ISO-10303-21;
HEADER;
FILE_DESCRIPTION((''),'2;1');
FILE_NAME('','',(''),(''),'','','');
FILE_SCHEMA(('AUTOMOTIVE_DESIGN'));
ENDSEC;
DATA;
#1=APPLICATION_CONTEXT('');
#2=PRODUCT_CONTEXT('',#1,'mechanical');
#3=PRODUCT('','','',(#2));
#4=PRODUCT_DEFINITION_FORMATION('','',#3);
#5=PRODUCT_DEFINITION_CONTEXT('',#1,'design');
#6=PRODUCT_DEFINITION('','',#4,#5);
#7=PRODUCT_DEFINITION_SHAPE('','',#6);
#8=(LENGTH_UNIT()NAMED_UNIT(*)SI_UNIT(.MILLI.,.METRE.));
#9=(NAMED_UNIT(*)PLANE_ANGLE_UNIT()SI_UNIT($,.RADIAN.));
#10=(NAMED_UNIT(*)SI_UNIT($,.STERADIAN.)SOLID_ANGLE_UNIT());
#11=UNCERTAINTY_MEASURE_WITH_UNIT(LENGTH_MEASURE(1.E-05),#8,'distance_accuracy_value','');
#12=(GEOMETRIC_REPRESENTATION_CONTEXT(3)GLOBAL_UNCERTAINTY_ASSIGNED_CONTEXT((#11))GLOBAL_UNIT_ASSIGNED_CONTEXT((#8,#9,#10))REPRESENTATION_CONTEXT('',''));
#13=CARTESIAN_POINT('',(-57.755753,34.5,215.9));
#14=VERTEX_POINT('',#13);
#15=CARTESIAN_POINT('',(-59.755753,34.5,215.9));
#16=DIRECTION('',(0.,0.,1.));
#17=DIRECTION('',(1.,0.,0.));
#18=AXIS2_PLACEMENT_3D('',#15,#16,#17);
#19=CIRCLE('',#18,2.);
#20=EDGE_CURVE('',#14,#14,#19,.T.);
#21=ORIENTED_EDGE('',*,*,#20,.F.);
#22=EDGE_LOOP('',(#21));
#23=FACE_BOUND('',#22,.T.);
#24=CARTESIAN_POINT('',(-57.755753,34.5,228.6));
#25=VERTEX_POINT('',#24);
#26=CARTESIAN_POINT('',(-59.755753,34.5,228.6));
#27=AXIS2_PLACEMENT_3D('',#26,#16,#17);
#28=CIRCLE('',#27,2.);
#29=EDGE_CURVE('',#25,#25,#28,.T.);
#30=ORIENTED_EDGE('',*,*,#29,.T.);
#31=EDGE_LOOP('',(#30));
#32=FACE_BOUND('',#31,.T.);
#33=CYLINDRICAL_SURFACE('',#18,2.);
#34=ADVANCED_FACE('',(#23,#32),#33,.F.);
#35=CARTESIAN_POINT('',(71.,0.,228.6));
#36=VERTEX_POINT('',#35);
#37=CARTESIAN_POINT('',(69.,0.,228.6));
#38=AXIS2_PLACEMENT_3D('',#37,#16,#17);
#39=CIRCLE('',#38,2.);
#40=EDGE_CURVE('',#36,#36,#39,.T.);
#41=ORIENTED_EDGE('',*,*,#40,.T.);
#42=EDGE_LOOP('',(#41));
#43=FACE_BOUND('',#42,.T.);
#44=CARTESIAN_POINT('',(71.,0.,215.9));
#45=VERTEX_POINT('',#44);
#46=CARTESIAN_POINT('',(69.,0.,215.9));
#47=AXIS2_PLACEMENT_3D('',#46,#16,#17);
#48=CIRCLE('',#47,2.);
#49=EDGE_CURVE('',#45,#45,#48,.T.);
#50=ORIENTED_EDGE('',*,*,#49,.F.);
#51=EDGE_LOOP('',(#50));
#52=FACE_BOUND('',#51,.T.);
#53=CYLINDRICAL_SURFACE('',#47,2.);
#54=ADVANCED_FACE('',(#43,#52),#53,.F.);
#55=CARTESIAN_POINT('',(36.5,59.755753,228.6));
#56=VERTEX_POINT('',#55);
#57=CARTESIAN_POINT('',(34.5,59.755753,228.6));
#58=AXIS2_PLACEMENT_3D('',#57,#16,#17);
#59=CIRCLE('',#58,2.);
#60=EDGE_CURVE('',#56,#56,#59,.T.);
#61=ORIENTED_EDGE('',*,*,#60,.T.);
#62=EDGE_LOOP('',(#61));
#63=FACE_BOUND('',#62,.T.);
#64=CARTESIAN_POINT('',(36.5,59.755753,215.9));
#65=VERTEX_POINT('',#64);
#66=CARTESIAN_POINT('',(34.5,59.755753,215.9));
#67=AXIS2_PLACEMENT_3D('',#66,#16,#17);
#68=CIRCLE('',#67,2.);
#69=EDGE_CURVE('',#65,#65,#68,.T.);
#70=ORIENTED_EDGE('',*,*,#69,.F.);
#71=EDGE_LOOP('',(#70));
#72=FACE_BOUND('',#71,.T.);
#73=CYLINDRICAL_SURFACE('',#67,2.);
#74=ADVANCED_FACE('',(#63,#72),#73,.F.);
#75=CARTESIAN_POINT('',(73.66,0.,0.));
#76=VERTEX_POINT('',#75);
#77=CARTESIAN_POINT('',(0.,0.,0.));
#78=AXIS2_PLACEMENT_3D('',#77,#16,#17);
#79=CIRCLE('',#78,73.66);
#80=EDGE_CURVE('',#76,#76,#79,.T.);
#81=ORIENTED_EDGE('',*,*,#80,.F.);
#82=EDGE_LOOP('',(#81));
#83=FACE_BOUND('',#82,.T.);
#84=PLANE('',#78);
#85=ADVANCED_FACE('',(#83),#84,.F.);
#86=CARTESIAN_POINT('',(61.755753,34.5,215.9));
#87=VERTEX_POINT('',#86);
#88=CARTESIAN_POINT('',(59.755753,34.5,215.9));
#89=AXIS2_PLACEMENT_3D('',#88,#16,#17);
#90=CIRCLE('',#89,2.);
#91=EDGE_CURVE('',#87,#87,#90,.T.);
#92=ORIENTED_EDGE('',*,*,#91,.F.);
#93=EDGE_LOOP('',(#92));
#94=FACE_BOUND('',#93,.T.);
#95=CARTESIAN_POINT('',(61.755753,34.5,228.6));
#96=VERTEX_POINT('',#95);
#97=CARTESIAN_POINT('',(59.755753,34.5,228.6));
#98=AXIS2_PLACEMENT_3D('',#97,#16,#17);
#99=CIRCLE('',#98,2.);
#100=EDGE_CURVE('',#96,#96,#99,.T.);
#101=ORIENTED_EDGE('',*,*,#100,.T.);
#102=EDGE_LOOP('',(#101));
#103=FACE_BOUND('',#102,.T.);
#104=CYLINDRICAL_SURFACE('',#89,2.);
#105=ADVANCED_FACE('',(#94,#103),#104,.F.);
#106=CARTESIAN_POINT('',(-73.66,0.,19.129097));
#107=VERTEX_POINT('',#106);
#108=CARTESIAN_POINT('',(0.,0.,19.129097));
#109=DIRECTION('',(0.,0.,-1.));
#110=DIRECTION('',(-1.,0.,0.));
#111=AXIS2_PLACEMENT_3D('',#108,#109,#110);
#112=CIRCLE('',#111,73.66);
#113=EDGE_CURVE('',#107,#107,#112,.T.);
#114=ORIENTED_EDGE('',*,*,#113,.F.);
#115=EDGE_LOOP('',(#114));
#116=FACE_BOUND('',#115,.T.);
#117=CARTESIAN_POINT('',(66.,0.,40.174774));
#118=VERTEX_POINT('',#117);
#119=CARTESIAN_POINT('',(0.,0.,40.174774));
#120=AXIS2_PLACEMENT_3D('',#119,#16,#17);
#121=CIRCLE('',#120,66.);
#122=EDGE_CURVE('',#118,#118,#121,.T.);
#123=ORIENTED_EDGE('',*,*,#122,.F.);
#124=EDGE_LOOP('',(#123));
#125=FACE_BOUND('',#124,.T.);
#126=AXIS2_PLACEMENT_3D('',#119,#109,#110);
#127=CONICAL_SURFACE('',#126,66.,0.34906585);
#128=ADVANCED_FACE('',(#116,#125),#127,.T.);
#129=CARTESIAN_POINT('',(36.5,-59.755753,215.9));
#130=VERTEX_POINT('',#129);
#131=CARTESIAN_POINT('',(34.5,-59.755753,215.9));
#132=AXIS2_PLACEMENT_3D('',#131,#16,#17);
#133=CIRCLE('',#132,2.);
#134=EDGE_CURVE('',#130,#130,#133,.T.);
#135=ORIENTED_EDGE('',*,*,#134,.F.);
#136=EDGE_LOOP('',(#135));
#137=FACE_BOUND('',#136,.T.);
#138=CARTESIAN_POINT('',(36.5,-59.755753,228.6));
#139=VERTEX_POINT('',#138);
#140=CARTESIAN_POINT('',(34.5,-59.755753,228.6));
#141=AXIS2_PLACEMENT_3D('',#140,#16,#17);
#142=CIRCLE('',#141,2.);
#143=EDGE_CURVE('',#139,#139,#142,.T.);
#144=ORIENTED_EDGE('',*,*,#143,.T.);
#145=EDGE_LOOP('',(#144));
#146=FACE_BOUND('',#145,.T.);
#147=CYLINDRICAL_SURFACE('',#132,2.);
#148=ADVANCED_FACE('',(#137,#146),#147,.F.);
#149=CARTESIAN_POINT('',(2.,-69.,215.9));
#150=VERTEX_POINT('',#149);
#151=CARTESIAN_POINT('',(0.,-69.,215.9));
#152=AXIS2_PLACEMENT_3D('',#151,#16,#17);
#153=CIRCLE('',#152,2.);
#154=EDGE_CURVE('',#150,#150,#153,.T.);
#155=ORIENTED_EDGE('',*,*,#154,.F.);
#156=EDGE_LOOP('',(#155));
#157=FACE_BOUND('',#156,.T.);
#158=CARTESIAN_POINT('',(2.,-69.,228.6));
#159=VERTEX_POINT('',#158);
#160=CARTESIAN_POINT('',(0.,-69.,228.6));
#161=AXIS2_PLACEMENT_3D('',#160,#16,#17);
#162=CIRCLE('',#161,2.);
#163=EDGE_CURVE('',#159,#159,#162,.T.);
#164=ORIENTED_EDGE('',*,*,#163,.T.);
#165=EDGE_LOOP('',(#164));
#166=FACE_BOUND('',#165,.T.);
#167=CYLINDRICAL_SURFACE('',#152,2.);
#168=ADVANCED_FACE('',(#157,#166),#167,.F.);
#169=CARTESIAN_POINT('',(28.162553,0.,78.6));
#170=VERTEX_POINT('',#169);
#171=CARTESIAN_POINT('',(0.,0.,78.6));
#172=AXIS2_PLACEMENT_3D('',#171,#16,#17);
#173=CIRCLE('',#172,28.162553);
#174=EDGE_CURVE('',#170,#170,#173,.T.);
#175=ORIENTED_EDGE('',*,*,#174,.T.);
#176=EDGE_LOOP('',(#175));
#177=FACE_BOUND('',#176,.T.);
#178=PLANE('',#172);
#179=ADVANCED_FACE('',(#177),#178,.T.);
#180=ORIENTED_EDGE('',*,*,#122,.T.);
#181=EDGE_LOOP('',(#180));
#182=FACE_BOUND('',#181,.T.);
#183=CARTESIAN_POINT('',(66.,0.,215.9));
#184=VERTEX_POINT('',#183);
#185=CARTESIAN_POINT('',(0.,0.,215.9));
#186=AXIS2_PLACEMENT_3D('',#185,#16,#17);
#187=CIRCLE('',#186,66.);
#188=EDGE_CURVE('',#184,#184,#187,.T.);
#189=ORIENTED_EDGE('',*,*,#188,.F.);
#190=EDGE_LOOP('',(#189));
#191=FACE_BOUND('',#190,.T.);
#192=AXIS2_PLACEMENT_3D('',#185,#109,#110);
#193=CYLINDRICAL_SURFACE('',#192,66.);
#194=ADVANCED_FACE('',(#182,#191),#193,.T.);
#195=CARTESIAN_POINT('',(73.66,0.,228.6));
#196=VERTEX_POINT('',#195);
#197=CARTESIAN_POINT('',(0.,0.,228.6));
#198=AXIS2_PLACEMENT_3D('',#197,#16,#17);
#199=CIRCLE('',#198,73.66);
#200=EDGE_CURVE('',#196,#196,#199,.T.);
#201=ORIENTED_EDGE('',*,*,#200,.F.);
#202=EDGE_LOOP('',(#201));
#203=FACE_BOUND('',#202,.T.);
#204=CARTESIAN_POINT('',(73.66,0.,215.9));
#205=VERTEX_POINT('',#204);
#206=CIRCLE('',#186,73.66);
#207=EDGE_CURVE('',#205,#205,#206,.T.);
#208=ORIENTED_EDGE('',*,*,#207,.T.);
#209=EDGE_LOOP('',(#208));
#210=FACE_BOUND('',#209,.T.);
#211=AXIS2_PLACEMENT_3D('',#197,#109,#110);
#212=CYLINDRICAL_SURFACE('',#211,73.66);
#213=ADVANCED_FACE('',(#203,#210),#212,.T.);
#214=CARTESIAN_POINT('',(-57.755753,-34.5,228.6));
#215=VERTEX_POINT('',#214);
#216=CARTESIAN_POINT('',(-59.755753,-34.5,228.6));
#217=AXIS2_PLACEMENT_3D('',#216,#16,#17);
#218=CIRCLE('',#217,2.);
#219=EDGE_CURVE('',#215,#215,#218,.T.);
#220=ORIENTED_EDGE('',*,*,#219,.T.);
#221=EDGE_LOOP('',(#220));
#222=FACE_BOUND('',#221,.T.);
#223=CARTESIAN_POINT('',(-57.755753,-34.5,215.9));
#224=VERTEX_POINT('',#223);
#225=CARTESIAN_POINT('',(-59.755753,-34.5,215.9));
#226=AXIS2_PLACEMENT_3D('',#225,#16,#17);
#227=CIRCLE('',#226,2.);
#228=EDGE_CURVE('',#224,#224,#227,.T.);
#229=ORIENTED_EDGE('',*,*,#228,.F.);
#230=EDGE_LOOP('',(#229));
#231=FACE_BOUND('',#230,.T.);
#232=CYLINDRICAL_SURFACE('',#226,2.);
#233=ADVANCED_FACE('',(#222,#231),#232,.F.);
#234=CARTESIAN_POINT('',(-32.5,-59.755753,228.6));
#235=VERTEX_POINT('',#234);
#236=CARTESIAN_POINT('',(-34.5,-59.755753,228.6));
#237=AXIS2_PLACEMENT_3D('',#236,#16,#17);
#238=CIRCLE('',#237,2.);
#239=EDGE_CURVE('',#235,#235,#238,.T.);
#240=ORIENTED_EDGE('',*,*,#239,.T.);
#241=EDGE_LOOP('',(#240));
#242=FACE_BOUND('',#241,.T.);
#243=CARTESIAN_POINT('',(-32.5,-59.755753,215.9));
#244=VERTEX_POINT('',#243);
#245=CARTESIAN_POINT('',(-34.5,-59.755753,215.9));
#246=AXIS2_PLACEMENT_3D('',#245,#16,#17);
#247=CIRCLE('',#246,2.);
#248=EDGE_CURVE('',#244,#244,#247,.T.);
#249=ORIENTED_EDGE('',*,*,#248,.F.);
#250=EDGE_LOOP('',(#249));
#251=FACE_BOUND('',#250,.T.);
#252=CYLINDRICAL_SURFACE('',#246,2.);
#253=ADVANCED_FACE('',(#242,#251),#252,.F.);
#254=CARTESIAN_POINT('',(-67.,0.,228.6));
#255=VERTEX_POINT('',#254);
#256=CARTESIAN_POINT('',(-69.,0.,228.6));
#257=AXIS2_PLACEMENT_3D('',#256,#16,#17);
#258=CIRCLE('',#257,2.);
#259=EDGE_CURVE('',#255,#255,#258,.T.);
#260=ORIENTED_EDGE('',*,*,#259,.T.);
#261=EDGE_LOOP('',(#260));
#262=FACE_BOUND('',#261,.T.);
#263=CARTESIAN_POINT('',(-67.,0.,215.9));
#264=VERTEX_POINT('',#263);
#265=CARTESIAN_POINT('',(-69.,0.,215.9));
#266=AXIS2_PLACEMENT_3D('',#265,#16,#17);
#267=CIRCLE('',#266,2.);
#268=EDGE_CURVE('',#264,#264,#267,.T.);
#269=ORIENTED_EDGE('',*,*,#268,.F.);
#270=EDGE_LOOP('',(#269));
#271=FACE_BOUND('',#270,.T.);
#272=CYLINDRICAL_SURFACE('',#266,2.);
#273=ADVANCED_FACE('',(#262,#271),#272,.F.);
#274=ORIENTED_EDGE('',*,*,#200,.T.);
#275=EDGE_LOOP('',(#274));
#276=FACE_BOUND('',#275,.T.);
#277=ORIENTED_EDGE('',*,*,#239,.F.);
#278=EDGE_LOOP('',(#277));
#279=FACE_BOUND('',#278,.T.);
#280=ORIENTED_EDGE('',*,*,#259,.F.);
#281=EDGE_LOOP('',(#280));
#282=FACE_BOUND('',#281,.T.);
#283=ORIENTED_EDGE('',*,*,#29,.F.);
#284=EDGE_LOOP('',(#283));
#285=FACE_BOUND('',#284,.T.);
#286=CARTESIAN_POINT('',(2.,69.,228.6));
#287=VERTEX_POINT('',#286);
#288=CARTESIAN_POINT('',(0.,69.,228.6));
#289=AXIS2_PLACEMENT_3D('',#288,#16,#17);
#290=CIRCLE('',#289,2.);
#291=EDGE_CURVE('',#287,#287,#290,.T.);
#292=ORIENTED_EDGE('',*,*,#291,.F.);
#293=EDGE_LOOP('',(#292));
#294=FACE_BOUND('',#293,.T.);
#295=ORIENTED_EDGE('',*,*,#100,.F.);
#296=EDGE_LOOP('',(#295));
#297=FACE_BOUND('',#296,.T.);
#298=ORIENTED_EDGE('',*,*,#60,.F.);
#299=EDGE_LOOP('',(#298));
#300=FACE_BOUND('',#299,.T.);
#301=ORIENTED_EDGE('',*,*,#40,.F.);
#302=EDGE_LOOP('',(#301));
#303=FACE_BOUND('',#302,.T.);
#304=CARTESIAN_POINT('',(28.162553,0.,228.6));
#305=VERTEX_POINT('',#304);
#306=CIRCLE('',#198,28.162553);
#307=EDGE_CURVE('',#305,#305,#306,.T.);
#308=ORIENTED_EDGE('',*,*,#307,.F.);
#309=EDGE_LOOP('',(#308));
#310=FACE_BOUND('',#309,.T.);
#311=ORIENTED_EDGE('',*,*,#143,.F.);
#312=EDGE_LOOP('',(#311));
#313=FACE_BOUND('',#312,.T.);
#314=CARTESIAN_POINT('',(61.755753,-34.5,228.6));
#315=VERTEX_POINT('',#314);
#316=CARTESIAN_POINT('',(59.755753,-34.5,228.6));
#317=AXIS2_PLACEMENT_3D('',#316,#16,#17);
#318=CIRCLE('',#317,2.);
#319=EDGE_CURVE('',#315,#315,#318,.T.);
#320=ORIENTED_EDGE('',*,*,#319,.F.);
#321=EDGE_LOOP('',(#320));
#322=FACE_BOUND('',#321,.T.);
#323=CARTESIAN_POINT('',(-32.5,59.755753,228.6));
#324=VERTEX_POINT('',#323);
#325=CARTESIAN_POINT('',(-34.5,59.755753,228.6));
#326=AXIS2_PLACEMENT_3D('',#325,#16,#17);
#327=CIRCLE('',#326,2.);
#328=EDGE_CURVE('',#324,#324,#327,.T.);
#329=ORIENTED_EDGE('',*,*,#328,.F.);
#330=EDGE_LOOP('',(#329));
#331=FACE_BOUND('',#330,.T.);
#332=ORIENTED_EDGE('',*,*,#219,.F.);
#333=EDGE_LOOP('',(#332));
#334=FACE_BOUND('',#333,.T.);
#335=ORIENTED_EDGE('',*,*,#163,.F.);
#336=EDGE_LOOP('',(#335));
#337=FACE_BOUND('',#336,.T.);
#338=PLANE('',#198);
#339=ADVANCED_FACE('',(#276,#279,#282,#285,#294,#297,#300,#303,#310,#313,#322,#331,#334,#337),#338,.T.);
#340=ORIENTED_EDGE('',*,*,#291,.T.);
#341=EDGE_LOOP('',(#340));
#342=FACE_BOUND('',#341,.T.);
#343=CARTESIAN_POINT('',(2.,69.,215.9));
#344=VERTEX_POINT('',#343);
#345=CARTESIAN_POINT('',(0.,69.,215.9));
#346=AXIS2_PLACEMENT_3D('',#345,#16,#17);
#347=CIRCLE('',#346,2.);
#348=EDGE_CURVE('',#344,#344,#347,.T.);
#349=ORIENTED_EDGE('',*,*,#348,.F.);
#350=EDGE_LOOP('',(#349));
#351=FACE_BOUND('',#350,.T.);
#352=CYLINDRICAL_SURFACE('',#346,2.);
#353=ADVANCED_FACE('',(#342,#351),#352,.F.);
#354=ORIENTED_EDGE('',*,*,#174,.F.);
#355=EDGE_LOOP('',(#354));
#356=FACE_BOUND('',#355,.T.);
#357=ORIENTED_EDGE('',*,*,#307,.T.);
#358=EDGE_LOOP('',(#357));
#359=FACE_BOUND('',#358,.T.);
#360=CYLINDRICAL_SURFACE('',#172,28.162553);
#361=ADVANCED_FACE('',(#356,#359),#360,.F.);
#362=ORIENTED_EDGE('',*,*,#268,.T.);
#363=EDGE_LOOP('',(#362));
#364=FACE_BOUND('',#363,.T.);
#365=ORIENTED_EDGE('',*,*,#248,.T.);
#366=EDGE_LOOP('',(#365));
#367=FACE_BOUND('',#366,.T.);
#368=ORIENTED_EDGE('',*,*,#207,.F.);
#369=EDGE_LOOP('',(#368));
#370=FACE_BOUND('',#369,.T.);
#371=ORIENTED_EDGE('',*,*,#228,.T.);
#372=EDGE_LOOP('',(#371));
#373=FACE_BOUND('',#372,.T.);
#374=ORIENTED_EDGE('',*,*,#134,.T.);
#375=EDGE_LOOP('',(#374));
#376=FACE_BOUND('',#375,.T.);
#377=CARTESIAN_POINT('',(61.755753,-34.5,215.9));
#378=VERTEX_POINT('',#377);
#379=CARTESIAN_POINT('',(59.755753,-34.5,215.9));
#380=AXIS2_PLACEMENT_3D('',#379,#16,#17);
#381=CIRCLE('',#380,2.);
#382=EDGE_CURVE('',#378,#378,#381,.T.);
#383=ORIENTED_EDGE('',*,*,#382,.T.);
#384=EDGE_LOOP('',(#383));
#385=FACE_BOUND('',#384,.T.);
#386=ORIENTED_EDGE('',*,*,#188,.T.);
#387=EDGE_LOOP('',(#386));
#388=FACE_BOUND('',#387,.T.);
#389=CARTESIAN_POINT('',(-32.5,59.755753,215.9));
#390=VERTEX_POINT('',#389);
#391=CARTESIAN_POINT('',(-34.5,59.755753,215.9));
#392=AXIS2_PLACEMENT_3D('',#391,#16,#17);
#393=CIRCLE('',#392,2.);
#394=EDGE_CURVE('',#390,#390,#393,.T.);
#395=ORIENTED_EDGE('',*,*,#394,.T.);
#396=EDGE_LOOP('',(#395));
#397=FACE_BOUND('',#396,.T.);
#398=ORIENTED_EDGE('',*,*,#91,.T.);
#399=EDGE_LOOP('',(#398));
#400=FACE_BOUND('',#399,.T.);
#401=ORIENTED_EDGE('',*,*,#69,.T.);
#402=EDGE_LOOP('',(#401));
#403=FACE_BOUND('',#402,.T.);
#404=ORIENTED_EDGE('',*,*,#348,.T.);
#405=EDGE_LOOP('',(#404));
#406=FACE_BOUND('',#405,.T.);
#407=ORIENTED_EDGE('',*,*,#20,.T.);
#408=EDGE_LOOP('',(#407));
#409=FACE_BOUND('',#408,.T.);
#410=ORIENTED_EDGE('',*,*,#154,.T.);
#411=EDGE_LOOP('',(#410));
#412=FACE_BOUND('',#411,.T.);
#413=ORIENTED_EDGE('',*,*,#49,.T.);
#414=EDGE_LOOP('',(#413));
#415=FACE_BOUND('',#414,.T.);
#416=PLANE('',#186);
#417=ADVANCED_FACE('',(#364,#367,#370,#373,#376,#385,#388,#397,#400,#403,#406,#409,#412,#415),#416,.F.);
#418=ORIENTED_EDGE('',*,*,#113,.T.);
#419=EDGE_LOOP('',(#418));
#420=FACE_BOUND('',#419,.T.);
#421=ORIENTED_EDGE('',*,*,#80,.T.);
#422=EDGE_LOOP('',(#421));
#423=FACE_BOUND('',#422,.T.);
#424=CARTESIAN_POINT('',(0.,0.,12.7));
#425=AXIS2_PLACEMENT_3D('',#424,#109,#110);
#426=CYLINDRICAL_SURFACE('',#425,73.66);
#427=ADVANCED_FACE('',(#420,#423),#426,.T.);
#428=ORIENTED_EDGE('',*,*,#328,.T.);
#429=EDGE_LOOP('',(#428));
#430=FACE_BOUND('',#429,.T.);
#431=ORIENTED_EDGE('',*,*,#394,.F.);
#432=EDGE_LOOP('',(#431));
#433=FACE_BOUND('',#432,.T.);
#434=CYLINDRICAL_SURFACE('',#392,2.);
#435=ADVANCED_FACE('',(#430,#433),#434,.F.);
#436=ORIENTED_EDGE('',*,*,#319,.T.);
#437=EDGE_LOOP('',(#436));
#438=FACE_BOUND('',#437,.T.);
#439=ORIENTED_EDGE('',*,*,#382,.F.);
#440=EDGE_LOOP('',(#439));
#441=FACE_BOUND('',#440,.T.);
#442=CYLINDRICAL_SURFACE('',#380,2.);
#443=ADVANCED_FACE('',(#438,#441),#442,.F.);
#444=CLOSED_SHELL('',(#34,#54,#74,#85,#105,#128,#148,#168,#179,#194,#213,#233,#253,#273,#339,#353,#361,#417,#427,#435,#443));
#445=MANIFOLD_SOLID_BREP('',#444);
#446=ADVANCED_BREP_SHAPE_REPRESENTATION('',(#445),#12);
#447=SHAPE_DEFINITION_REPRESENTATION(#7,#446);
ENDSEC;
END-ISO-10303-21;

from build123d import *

# Parameters (mm, degrees)
SKETCH2_R           = 73.66
BOSS_EXTRUDE1_DEPTH = 12.7
SKETCH3_R           = 66
BOSS_EXTRUDE2_DEPTH = 203.2
SKETCH4_R           = 73.66
BOSS_EXTRUDE3_DEPTH = 12.7
SKETCH6_R           = 2
CUT_EXTRUDE1_DEPTH  = 12.7
CHAMFER1_SIZE       = 27.474774195
CHAMFER1_SIZE_2     = 10
SKETCH8_R           = 28.1625529
CUT_EXTRUDE2_DEPTH  = 150


with BuildPart() as part:
    # Sketch2 → Boss-Extrude1 (new body)
    with BuildSketch(Plane.XY):
        Circle(SKETCH2_R)
    extrude(amount=BOSS_EXTRUDE1_DEPTH)

    # Sketch3 → Boss-Extrude2 (add)
    with BuildSketch(Plane.XY.offset(12.7)):
        Circle(SKETCH3_R)
    extrude(amount=BOSS_EXTRUDE2_DEPTH)

    # Sketch4 → Boss-Extrude3 (add)
    with BuildSketch(Plane.XY.offset(215.9)):
        Circle(SKETCH4_R)
    extrude(amount=BOSS_EXTRUDE3_DEPTH)

    # Sketch6 → Cut-Extrude1 (cut)
    with BuildSketch(Plane.XY.offset(228.6)):
        with Locations((0, 69)):
            Circle(SKETCH6_R)
        with Locations((34.5, 59.755752861)):
            Circle(SKETCH6_R)
        with Locations((59.755752861, 34.5)):
            Circle(SKETCH6_R)
        with Locations((69, 0)):
            Circle(SKETCH6_R)
        with Locations((59.755752861, -34.5)):
            Circle(SKETCH6_R)
        with Locations((34.5, -59.755752861)):
            Circle(SKETCH6_R)
        with Locations((0, -69)):
            Circle(SKETCH6_R)
        with Locations((-34.5, -59.755752861)):
            Circle(SKETCH6_R)
        with Locations((-59.755752861, -34.5)):
            Circle(SKETCH6_R)
        with Locations((-69, 0)):
            Circle(SKETCH6_R)
        with Locations((-59.755752861, 34.5)):
            Circle(SKETCH6_R)
        with Locations((-34.5, 59.755752861)):
            Circle(SKETCH6_R)
    extrude(amount=-CUT_EXTRUDE1_DEPTH, mode=Mode.SUBTRACT)

    # Chamfer1
    # the kernel refuses this chamfer: 27.474774195, 10 mm, written as the material it adds along each edge
    with BuildSketch(Plane(origin=(0, 0, 12.7), x_dir=(1, 0, 0), z_dir=(0, -1, 0))) as chamfer1_piece_1_section:
        Polygon((66, CHAMFER1_SIZE), (66 + CHAMFER1_SIZE_2, 0), (66, 0), align=None)
    chamfer1_piece_1 = revolve(axis=Axis((0, 0, 12.7), (0, 0, 1)), mode=Mode.PRIVATE)
    chamfer1_piece_1 = chamfer1_piece_1 & Plane(origin=(0, 0, 30.030529596), x_dir=(1, 0, 0), z_dir=(0, 0, -1)) * Cylinder(73.66, 304, mode=Mode.PRIVATE)
    add(chamfer1_piece_1)

    # Sketch8 → Cut-Extrude2 (cut)
    with BuildSketch(Plane.XY.offset(228.6)):
        Circle(SKETCH8_R)
    extrude(amount=-CUT_EXTRUDE2_DEPTH, mode=Mode.SUBTRACT)


solid = part.part
